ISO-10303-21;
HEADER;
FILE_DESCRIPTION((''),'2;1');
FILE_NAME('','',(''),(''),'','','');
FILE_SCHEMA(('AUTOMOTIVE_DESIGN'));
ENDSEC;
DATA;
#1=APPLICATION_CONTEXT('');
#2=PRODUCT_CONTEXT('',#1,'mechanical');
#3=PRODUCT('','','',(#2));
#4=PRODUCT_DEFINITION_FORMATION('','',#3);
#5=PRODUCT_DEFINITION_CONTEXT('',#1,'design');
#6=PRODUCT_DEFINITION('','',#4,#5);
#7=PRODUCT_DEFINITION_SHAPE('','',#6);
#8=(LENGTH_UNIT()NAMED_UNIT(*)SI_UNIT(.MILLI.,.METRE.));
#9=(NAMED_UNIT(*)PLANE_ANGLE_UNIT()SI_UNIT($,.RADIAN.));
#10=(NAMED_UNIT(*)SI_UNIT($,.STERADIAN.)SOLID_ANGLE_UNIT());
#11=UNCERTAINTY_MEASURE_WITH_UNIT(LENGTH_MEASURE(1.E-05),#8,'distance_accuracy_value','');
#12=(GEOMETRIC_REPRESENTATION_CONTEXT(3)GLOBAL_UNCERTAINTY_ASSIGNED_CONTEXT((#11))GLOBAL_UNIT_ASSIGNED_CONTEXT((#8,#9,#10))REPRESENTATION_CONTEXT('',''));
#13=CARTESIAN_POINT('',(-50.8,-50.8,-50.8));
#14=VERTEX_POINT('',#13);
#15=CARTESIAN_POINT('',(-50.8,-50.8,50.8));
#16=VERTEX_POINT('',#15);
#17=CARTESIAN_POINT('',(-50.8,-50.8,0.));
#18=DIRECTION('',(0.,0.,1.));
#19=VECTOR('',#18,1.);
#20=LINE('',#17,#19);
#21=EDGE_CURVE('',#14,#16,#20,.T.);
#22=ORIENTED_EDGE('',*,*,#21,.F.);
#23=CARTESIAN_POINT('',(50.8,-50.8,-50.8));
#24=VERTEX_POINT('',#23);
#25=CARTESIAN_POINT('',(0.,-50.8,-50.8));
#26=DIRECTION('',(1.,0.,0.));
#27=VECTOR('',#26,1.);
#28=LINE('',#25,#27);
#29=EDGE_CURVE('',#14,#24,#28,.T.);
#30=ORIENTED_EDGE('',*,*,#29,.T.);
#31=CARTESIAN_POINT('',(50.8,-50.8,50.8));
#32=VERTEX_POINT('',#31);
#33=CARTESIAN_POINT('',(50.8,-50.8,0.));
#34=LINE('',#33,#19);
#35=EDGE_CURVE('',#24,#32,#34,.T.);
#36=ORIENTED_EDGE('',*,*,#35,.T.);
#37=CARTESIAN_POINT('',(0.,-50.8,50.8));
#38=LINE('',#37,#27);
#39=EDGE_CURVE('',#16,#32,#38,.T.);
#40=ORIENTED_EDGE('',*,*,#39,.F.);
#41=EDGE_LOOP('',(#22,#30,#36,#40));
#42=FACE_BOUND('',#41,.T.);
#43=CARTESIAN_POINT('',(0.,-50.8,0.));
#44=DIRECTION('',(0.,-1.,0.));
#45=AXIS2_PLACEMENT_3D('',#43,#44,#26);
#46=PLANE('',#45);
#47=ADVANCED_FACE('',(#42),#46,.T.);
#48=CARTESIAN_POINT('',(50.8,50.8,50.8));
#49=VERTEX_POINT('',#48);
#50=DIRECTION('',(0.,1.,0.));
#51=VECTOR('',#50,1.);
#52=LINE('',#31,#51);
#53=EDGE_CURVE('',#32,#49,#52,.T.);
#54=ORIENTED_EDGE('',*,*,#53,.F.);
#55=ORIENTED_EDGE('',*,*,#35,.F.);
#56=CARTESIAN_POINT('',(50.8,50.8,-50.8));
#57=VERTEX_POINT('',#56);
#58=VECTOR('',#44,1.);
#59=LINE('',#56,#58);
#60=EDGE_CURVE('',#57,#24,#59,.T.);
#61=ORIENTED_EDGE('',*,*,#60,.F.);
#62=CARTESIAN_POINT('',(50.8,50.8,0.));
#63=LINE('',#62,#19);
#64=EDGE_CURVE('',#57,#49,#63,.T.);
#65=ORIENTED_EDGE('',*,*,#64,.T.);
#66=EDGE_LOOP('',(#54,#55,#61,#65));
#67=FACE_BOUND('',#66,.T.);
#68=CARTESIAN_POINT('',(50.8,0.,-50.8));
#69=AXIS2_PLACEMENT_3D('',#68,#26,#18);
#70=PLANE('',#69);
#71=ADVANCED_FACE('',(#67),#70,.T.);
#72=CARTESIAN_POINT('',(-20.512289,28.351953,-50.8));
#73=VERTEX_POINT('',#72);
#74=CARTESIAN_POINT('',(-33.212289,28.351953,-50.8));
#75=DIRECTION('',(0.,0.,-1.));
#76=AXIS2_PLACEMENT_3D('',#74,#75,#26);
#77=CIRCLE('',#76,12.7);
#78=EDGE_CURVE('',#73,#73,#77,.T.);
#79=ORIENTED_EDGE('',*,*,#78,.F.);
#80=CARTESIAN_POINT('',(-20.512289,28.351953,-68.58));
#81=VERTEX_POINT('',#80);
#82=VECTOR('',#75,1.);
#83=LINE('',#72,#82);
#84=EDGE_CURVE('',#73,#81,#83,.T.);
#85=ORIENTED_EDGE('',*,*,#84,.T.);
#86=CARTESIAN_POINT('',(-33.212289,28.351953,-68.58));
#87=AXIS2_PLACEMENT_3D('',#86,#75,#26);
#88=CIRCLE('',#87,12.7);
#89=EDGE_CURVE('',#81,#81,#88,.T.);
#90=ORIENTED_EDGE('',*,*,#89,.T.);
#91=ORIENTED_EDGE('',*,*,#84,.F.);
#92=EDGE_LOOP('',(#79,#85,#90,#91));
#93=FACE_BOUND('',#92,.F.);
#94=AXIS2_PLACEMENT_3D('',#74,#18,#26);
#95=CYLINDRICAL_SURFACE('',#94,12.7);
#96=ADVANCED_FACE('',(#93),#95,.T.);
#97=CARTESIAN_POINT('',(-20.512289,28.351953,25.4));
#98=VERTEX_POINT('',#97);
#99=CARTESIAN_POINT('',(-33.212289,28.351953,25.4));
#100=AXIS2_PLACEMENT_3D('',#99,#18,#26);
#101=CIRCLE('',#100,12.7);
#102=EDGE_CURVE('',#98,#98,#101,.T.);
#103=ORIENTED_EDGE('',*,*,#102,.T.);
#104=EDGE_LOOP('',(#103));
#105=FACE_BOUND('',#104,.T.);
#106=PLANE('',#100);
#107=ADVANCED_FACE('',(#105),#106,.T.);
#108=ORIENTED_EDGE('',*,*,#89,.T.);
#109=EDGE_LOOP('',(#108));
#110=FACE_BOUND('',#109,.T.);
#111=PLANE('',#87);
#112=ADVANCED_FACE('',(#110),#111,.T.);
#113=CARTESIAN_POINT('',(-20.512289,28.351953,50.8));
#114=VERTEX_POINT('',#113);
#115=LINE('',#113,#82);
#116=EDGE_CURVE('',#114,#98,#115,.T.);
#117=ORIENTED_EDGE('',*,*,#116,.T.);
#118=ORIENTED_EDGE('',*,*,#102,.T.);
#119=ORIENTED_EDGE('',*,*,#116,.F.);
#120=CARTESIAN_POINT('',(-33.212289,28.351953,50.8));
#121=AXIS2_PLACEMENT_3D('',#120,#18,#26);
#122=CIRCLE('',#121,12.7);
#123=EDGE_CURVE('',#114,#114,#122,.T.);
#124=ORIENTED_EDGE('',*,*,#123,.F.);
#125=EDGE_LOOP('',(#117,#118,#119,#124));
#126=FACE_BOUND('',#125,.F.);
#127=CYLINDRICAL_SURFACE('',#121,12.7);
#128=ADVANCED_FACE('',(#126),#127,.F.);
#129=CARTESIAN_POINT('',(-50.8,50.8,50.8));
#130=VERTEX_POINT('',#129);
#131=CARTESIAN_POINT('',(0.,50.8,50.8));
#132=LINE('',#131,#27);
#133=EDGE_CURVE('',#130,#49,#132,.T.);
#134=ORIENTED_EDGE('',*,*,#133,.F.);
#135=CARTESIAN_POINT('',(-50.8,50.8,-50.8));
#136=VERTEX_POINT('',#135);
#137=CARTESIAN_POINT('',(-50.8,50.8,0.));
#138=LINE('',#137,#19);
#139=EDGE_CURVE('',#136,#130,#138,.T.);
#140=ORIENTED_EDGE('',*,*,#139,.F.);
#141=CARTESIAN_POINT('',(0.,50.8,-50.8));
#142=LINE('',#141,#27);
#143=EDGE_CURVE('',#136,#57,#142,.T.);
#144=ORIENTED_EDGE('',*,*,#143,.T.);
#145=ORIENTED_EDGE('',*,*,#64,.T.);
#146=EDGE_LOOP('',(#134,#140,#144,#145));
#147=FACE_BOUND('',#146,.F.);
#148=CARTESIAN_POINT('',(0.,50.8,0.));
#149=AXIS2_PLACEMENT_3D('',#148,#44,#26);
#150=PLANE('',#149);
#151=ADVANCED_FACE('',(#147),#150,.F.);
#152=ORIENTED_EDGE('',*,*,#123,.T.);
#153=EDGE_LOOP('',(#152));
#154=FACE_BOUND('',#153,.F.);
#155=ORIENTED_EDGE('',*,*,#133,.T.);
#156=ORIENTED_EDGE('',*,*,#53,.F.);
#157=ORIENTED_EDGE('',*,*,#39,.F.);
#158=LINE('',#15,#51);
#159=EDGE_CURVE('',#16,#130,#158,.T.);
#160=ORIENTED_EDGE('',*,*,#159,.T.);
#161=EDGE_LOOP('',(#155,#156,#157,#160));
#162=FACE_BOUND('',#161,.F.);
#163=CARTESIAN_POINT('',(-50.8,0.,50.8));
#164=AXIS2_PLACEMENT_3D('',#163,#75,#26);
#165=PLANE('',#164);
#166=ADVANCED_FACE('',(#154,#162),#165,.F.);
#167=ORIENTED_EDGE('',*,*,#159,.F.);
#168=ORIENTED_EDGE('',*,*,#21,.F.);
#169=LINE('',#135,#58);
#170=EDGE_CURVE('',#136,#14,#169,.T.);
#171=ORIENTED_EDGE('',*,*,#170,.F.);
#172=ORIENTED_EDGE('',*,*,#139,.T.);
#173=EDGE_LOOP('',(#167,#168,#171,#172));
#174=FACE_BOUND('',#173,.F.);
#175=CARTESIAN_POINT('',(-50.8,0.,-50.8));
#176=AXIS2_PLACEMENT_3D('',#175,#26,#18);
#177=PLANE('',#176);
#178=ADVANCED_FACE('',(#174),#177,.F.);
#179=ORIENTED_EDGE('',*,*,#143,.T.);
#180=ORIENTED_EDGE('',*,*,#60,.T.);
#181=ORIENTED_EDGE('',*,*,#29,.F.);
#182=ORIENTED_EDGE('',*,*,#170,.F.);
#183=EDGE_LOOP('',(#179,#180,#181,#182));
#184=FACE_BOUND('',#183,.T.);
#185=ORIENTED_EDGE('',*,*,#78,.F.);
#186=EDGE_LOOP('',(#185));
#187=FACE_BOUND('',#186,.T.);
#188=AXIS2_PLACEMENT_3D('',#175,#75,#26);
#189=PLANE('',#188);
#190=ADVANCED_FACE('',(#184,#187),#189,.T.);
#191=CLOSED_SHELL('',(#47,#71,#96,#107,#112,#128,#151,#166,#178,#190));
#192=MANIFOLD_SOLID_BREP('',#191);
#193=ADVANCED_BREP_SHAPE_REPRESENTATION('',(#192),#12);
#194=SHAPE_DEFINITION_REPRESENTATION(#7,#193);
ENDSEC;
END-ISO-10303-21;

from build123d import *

# Parameters (mm, degrees)
F1_W     = 101.6
F1_H     = 101.6
F2_DEPTH = 50.8
F3_R     = 12.7
F4_DEPTH = 25.4
F5_R     = 12.7
F6_DEPTH = 17.78


# Not quite as in the source:
# - a variable given as a bare number and used for a length is read in inches; the dataset says mm whatever the document's units were


with BuildPart() as f2:
    # F1 (on Front) → F2 (new body, symmetric)
    with BuildSketch(Plane.XZ):
        Rectangle(F1_W, F1_H)
    extrude(amount=F2_DEPTH, both=True)

    # F3 (on face) → F4 (cut)
    with BuildSketch(Plane.XY.offset(50.8)):
        with Locations((-33.2122892141, 28.3519532531)):
            Circle(F3_R)
    extrude(amount=-F4_DEPTH, mode=Mode.SUBTRACT)

    # F5 (on face) → F6 (join)
    with BuildSketch(Plane(origin=(0, 0, -50.8), x_dir=(1, 0, 0), z_dir=(0, 0, -1))):
        with Locations((-33.2122892141, -28.3519532531)):
            Circle(F5_R)
    extrude(amount=F6_DEPTH)


solid = f2.part
